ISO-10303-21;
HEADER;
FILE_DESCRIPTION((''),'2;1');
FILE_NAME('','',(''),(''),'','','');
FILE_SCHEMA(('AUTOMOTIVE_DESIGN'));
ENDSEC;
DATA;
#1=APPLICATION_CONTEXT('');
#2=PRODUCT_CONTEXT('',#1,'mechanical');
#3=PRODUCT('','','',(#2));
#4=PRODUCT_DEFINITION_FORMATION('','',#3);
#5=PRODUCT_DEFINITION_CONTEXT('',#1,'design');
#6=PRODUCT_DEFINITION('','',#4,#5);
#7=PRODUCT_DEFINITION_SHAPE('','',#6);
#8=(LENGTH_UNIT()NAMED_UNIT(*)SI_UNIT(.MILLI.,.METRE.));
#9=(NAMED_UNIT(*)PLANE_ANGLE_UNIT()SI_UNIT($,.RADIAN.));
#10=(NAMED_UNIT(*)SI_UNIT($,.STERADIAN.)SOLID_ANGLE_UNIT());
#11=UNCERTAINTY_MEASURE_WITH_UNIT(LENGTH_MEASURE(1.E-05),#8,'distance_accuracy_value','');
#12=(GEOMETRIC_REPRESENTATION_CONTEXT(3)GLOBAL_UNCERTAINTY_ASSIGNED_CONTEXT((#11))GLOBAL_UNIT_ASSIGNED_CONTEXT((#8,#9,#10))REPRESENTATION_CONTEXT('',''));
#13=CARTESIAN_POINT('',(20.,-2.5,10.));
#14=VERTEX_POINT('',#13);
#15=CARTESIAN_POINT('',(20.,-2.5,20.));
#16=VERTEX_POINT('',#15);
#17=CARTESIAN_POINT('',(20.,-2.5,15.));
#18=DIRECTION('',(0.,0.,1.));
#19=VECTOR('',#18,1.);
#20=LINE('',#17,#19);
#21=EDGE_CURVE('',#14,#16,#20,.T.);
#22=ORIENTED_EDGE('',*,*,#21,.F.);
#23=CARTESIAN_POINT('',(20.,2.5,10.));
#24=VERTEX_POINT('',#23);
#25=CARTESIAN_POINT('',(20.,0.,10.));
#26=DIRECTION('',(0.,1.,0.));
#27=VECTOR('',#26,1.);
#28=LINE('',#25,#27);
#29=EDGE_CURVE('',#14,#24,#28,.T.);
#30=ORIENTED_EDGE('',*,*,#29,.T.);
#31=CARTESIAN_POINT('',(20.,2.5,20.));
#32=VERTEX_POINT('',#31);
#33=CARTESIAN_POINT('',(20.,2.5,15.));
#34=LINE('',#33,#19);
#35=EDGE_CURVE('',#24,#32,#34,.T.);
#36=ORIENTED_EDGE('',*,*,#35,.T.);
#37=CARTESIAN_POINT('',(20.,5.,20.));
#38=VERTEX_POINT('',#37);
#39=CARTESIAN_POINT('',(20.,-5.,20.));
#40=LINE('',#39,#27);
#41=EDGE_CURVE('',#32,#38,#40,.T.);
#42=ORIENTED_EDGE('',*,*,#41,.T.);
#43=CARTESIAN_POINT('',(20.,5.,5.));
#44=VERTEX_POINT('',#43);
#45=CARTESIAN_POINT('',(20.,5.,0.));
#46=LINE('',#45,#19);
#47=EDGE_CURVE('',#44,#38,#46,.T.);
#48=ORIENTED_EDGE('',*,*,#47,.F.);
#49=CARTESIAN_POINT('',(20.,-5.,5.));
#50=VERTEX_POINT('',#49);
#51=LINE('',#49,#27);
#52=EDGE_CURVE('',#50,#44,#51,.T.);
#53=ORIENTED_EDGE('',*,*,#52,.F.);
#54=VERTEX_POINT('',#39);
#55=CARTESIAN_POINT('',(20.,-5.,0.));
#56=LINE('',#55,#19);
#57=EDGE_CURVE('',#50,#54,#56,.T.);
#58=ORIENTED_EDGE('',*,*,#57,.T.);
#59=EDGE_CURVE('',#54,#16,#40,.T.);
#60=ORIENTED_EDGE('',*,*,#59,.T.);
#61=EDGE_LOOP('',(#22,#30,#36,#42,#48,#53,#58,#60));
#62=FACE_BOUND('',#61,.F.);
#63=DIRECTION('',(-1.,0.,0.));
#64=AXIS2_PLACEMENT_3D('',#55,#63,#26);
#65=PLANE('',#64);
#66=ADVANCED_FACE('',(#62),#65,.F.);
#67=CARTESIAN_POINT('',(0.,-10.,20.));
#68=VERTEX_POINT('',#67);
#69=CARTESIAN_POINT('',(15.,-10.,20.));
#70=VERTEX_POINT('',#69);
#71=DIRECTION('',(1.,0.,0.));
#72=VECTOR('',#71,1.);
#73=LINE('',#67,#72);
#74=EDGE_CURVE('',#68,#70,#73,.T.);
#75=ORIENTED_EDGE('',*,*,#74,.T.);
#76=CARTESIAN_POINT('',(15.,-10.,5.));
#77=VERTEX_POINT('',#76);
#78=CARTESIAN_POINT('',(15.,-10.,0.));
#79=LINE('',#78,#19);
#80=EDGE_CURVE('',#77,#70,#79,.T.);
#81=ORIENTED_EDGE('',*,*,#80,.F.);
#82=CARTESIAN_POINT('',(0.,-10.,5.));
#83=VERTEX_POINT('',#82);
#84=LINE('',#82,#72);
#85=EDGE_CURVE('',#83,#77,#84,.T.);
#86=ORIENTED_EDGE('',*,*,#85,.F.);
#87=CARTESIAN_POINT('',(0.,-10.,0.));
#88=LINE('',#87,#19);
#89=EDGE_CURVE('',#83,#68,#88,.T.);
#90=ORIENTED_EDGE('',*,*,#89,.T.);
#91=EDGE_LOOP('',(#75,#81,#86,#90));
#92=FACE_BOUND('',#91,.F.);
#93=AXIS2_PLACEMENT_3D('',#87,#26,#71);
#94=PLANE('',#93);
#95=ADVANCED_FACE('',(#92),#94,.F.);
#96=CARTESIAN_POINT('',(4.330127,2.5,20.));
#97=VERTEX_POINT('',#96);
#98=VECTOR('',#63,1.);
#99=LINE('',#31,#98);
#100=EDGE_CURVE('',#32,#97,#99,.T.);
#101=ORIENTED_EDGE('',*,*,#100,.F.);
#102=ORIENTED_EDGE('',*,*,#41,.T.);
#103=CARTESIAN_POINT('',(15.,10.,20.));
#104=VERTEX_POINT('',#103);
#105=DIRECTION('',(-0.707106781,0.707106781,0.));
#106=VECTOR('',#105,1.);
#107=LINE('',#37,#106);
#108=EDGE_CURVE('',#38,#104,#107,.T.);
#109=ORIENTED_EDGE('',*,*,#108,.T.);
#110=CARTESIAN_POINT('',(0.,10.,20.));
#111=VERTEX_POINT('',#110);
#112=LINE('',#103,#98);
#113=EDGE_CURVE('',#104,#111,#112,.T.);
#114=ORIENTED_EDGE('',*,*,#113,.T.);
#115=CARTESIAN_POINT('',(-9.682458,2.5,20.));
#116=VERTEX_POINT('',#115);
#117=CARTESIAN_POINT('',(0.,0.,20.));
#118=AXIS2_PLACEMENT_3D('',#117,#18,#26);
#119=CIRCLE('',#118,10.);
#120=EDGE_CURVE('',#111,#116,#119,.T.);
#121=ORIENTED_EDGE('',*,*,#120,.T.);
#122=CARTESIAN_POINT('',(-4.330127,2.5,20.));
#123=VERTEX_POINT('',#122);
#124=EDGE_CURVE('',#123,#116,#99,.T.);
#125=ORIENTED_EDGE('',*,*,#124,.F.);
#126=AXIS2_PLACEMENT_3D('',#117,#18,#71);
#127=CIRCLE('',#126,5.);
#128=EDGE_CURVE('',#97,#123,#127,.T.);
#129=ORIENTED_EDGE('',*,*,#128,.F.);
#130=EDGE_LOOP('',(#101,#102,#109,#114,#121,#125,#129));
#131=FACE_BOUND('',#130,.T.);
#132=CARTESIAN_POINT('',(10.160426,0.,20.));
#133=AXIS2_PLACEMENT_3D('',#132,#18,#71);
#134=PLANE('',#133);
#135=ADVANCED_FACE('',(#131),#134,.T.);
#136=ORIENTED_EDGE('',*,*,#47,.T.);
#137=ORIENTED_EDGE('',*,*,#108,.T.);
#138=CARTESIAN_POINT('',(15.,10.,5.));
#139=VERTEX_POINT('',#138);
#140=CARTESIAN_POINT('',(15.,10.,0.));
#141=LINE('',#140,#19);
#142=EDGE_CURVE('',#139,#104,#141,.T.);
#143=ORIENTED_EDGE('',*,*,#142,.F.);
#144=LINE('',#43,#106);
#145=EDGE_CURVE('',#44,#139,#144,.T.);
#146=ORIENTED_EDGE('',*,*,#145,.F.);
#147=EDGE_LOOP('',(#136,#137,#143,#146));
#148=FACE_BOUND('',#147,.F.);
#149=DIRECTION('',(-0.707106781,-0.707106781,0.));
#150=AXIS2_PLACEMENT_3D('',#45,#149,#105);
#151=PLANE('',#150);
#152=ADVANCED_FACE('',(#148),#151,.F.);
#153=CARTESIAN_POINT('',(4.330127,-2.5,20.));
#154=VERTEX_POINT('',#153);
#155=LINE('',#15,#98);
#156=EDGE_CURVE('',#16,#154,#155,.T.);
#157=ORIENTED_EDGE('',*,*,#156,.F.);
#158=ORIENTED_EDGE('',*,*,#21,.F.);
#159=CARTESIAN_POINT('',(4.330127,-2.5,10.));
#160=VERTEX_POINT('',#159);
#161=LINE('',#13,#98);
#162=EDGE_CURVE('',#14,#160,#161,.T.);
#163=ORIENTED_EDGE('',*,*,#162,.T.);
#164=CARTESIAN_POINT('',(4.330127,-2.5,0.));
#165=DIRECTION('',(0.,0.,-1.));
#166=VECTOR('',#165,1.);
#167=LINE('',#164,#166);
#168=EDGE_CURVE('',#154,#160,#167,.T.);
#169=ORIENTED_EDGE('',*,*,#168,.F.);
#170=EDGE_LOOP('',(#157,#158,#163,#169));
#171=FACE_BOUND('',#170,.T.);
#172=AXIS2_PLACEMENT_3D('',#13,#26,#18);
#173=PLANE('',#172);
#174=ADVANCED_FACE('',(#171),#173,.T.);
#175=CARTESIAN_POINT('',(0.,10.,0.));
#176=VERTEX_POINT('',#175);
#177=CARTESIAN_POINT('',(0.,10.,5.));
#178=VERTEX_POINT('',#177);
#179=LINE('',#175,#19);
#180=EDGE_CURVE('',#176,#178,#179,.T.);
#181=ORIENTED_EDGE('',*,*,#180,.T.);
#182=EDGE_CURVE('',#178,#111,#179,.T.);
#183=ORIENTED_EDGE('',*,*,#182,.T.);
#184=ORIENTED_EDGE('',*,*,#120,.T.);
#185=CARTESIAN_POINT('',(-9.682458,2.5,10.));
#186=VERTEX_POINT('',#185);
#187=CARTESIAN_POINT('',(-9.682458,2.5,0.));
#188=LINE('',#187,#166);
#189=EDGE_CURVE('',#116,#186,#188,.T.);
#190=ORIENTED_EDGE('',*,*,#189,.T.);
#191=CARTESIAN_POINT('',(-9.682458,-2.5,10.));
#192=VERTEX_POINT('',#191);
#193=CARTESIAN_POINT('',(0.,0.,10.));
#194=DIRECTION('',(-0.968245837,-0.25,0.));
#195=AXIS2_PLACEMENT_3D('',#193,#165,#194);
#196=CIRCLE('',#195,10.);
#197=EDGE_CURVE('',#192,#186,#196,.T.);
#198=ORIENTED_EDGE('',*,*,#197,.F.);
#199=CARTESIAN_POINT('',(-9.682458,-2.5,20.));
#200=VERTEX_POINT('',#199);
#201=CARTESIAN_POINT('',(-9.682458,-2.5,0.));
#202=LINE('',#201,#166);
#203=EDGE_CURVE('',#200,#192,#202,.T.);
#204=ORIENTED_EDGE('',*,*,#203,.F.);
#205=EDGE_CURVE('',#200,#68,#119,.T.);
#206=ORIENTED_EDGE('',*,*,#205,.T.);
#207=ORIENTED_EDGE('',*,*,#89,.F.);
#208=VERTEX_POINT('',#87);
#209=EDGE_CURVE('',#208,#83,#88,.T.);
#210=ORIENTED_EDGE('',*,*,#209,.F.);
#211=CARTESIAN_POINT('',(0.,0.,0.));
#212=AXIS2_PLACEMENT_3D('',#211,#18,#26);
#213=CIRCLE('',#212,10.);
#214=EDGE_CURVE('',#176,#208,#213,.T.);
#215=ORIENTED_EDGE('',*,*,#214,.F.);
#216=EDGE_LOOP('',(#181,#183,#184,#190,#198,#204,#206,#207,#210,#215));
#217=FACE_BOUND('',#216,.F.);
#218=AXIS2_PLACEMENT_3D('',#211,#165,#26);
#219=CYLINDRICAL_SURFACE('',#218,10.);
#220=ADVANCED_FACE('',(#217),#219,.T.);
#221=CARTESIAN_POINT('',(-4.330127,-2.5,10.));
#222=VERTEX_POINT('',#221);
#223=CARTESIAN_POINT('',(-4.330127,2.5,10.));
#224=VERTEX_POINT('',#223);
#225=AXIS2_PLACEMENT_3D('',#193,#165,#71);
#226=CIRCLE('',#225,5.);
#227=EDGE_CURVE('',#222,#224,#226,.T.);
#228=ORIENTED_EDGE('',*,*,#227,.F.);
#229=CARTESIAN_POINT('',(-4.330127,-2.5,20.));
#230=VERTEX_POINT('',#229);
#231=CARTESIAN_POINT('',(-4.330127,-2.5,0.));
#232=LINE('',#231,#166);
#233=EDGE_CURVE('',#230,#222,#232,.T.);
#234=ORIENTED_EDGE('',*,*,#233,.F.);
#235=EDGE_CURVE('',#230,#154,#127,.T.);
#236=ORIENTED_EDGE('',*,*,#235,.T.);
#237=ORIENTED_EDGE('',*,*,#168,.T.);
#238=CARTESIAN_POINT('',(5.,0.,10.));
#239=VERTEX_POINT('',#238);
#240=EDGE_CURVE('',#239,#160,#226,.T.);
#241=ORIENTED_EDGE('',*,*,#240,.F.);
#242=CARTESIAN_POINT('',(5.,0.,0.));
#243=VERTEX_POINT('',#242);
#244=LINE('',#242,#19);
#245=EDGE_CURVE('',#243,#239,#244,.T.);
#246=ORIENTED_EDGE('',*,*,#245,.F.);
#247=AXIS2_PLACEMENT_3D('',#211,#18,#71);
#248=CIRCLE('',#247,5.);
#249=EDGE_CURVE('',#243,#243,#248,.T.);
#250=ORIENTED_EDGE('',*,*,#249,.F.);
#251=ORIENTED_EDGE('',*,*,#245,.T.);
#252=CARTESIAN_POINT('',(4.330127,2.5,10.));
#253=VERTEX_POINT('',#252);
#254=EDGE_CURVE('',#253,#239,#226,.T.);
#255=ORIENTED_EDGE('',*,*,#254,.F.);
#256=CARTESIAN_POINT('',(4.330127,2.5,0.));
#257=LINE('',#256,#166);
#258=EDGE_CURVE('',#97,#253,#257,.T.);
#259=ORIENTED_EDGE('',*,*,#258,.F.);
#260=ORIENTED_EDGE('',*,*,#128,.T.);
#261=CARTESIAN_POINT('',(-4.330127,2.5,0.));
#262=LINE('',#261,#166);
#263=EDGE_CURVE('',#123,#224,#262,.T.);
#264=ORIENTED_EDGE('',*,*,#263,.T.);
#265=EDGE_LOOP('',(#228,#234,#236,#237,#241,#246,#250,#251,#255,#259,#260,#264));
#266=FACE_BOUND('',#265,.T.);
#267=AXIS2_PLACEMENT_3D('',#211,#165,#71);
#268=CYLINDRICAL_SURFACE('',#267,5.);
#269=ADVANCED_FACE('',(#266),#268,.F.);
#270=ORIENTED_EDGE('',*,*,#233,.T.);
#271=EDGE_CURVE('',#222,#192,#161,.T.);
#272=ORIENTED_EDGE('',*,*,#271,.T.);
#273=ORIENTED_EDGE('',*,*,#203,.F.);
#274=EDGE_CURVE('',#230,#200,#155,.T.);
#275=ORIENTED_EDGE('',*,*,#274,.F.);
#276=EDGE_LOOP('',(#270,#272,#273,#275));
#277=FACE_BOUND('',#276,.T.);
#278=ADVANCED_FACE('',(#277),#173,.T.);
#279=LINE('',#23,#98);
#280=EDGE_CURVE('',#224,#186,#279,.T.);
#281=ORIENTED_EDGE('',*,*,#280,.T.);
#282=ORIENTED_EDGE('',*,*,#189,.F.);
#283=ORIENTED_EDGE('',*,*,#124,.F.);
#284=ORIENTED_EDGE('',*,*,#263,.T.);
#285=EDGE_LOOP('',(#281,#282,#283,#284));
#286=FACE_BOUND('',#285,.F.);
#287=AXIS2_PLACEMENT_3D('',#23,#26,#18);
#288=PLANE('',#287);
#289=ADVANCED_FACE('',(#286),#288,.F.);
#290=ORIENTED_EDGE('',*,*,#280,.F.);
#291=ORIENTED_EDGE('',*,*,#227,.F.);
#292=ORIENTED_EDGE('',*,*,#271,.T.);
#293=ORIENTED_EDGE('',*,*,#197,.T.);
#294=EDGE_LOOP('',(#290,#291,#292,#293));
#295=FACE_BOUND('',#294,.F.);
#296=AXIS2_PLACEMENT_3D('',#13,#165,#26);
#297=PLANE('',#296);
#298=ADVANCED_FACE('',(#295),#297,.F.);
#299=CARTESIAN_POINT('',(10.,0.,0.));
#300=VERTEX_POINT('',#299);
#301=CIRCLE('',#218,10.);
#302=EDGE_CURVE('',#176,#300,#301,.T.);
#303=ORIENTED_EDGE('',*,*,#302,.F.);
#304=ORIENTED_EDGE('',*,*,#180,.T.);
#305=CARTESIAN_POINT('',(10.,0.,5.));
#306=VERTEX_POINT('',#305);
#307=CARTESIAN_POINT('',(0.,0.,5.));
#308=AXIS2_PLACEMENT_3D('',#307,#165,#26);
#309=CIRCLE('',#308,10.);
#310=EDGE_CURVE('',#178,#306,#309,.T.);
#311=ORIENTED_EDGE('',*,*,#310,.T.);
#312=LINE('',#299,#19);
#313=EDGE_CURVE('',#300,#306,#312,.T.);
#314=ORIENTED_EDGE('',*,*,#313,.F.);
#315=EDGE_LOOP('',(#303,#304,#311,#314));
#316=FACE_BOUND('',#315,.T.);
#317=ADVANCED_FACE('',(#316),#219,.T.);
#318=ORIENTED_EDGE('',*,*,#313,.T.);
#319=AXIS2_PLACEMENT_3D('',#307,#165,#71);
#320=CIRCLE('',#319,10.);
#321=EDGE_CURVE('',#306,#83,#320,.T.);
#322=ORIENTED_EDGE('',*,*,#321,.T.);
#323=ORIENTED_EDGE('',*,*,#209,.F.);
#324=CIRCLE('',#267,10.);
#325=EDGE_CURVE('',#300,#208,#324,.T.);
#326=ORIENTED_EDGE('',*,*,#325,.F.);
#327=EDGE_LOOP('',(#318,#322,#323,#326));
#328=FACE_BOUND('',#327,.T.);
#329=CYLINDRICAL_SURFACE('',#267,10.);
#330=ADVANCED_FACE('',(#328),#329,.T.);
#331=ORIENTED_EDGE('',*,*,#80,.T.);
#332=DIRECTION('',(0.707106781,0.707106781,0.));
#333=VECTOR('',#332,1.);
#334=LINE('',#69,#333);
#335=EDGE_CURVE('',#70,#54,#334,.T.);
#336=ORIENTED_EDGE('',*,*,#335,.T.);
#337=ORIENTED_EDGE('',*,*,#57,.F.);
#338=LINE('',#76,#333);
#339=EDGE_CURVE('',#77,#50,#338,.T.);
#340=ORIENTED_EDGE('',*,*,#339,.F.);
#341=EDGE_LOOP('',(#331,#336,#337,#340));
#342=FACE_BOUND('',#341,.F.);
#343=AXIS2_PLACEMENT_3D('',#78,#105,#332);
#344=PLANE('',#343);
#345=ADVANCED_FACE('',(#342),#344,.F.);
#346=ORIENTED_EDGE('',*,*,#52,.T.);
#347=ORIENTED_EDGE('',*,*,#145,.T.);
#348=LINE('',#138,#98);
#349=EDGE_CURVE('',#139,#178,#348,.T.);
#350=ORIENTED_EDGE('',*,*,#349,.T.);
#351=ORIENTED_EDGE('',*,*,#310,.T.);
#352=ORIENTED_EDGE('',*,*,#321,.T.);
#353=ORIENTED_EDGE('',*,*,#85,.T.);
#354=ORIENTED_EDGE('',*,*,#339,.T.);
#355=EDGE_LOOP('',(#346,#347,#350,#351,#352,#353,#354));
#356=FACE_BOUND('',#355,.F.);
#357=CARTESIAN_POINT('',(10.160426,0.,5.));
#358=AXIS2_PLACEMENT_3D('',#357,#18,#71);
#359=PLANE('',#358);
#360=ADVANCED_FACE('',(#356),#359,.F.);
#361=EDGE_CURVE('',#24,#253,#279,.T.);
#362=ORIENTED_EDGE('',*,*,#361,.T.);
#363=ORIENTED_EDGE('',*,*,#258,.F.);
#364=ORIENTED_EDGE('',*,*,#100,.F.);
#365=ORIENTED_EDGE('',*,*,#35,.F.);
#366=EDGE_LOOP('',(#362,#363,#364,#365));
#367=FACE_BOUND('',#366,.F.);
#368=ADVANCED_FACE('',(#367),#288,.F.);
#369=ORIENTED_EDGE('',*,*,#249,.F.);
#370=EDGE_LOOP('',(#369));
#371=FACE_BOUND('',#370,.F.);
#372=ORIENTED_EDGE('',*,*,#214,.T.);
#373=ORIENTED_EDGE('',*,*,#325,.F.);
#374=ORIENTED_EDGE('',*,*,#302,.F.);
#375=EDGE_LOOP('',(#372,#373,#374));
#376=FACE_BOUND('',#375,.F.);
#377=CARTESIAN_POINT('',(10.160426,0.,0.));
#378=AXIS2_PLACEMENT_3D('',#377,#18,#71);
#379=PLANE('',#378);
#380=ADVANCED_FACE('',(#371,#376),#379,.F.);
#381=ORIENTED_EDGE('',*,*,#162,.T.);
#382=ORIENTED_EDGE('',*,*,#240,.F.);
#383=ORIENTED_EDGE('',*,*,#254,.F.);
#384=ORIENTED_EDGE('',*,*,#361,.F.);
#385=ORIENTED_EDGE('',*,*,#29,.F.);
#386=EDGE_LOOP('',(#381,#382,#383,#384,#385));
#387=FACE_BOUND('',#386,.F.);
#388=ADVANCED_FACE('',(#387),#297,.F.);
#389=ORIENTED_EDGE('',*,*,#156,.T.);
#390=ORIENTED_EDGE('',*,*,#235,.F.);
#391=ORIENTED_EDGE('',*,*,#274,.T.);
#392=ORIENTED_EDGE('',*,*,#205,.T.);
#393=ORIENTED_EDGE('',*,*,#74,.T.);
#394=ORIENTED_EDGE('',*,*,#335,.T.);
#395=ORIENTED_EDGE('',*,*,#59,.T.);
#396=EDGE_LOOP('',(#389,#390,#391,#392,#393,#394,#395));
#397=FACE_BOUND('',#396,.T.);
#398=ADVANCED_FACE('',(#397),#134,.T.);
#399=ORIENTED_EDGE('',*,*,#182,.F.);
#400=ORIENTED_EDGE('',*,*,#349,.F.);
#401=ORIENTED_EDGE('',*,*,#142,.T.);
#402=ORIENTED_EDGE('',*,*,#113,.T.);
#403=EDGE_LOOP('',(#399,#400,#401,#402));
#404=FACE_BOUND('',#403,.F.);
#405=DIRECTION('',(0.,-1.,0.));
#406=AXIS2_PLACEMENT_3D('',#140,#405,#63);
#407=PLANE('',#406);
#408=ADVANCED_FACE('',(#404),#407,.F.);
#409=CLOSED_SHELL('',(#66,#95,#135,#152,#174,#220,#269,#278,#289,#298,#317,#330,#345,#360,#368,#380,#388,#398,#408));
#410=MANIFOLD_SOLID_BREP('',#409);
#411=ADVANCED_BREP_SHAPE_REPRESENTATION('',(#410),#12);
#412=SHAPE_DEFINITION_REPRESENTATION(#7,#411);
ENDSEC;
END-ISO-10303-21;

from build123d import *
from build123d import SkipClean  # not in build123d's __all__

# Parameters (mm, degrees)
F0_R     = 5
F1_DEPTH = 20
F2_DEPTH = 20
F3_W     = 5
F3_H     = 10
F4_DEPTH = 30
F5_DEPTH = 5


with BuildPart() as f1:
    # F0 (on Top) → F1 (new body)
    with BuildSketch(Plane.XY):
        with BuildLine():
            ThreePointArc((0, -10), (7.0710678119, -7.0710678119), (10, 0))
            ThreePointArc((10, 0), (7.0710678119, 7.0710678119), (0, 10))
            ThreePointArc((0, 10), (-10, 0), (0, -10))
        make_face()
        Circle(F0_R, mode=Mode.SUBTRACT)
    extrude(amount=F1_DEPTH)

    # F0 (on Top) → F2 (join)
    with BuildSketch(Plane.XY):
        with BuildLine():
            ThreePointArc((0, 10), (7.0710678119, 7.0710678119), (10, 0))
            ThreePointArc((10, 0), (7.0710678119, -7.0710678119), (0, -10))
            Line((0, -10), (15, -10))
            Line((15, -10), (20, -5))
            Line((20, -5), (20, 5))
            Line((20, 5), (15, 10))
            Line((15, 10), (0, 10))
        make_face()
    extrude(amount=F2_DEPTH)

    # F3 (on face) → F4 (cut)
    with BuildSketch(Plane.YZ.offset(20)):
        with Locations((0, 15)):
            Rectangle(F3_W, F3_H)
    extrude(amount=-F4_DEPTH, mode=Mode.SUBTRACT)

    # F0 (on Top) → F5 (cut)
    with BuildSketch(Plane.XY):
        with BuildLine():
            ThreePointArc((0, 10), (7.0710678119, 7.0710678119), (10, 0))
            ThreePointArc((10, 0), (7.0710678119, -7.0710678119), (0, -10))
            Line((0, -10), (15, -10))
            Line((15, -10), (20, -5))
            Line((20, -5), (20, 5))
            Line((20, 5), (15, 10))
            Line((15, 10), (0, 10))
        make_face()
    with SkipClean():  # cleaning this boolean's faces spoils the solid; the shape is the same uncleaned
        extrude(amount=F5_DEPTH, mode=Mode.SUBTRACT)


solid = f1.part
